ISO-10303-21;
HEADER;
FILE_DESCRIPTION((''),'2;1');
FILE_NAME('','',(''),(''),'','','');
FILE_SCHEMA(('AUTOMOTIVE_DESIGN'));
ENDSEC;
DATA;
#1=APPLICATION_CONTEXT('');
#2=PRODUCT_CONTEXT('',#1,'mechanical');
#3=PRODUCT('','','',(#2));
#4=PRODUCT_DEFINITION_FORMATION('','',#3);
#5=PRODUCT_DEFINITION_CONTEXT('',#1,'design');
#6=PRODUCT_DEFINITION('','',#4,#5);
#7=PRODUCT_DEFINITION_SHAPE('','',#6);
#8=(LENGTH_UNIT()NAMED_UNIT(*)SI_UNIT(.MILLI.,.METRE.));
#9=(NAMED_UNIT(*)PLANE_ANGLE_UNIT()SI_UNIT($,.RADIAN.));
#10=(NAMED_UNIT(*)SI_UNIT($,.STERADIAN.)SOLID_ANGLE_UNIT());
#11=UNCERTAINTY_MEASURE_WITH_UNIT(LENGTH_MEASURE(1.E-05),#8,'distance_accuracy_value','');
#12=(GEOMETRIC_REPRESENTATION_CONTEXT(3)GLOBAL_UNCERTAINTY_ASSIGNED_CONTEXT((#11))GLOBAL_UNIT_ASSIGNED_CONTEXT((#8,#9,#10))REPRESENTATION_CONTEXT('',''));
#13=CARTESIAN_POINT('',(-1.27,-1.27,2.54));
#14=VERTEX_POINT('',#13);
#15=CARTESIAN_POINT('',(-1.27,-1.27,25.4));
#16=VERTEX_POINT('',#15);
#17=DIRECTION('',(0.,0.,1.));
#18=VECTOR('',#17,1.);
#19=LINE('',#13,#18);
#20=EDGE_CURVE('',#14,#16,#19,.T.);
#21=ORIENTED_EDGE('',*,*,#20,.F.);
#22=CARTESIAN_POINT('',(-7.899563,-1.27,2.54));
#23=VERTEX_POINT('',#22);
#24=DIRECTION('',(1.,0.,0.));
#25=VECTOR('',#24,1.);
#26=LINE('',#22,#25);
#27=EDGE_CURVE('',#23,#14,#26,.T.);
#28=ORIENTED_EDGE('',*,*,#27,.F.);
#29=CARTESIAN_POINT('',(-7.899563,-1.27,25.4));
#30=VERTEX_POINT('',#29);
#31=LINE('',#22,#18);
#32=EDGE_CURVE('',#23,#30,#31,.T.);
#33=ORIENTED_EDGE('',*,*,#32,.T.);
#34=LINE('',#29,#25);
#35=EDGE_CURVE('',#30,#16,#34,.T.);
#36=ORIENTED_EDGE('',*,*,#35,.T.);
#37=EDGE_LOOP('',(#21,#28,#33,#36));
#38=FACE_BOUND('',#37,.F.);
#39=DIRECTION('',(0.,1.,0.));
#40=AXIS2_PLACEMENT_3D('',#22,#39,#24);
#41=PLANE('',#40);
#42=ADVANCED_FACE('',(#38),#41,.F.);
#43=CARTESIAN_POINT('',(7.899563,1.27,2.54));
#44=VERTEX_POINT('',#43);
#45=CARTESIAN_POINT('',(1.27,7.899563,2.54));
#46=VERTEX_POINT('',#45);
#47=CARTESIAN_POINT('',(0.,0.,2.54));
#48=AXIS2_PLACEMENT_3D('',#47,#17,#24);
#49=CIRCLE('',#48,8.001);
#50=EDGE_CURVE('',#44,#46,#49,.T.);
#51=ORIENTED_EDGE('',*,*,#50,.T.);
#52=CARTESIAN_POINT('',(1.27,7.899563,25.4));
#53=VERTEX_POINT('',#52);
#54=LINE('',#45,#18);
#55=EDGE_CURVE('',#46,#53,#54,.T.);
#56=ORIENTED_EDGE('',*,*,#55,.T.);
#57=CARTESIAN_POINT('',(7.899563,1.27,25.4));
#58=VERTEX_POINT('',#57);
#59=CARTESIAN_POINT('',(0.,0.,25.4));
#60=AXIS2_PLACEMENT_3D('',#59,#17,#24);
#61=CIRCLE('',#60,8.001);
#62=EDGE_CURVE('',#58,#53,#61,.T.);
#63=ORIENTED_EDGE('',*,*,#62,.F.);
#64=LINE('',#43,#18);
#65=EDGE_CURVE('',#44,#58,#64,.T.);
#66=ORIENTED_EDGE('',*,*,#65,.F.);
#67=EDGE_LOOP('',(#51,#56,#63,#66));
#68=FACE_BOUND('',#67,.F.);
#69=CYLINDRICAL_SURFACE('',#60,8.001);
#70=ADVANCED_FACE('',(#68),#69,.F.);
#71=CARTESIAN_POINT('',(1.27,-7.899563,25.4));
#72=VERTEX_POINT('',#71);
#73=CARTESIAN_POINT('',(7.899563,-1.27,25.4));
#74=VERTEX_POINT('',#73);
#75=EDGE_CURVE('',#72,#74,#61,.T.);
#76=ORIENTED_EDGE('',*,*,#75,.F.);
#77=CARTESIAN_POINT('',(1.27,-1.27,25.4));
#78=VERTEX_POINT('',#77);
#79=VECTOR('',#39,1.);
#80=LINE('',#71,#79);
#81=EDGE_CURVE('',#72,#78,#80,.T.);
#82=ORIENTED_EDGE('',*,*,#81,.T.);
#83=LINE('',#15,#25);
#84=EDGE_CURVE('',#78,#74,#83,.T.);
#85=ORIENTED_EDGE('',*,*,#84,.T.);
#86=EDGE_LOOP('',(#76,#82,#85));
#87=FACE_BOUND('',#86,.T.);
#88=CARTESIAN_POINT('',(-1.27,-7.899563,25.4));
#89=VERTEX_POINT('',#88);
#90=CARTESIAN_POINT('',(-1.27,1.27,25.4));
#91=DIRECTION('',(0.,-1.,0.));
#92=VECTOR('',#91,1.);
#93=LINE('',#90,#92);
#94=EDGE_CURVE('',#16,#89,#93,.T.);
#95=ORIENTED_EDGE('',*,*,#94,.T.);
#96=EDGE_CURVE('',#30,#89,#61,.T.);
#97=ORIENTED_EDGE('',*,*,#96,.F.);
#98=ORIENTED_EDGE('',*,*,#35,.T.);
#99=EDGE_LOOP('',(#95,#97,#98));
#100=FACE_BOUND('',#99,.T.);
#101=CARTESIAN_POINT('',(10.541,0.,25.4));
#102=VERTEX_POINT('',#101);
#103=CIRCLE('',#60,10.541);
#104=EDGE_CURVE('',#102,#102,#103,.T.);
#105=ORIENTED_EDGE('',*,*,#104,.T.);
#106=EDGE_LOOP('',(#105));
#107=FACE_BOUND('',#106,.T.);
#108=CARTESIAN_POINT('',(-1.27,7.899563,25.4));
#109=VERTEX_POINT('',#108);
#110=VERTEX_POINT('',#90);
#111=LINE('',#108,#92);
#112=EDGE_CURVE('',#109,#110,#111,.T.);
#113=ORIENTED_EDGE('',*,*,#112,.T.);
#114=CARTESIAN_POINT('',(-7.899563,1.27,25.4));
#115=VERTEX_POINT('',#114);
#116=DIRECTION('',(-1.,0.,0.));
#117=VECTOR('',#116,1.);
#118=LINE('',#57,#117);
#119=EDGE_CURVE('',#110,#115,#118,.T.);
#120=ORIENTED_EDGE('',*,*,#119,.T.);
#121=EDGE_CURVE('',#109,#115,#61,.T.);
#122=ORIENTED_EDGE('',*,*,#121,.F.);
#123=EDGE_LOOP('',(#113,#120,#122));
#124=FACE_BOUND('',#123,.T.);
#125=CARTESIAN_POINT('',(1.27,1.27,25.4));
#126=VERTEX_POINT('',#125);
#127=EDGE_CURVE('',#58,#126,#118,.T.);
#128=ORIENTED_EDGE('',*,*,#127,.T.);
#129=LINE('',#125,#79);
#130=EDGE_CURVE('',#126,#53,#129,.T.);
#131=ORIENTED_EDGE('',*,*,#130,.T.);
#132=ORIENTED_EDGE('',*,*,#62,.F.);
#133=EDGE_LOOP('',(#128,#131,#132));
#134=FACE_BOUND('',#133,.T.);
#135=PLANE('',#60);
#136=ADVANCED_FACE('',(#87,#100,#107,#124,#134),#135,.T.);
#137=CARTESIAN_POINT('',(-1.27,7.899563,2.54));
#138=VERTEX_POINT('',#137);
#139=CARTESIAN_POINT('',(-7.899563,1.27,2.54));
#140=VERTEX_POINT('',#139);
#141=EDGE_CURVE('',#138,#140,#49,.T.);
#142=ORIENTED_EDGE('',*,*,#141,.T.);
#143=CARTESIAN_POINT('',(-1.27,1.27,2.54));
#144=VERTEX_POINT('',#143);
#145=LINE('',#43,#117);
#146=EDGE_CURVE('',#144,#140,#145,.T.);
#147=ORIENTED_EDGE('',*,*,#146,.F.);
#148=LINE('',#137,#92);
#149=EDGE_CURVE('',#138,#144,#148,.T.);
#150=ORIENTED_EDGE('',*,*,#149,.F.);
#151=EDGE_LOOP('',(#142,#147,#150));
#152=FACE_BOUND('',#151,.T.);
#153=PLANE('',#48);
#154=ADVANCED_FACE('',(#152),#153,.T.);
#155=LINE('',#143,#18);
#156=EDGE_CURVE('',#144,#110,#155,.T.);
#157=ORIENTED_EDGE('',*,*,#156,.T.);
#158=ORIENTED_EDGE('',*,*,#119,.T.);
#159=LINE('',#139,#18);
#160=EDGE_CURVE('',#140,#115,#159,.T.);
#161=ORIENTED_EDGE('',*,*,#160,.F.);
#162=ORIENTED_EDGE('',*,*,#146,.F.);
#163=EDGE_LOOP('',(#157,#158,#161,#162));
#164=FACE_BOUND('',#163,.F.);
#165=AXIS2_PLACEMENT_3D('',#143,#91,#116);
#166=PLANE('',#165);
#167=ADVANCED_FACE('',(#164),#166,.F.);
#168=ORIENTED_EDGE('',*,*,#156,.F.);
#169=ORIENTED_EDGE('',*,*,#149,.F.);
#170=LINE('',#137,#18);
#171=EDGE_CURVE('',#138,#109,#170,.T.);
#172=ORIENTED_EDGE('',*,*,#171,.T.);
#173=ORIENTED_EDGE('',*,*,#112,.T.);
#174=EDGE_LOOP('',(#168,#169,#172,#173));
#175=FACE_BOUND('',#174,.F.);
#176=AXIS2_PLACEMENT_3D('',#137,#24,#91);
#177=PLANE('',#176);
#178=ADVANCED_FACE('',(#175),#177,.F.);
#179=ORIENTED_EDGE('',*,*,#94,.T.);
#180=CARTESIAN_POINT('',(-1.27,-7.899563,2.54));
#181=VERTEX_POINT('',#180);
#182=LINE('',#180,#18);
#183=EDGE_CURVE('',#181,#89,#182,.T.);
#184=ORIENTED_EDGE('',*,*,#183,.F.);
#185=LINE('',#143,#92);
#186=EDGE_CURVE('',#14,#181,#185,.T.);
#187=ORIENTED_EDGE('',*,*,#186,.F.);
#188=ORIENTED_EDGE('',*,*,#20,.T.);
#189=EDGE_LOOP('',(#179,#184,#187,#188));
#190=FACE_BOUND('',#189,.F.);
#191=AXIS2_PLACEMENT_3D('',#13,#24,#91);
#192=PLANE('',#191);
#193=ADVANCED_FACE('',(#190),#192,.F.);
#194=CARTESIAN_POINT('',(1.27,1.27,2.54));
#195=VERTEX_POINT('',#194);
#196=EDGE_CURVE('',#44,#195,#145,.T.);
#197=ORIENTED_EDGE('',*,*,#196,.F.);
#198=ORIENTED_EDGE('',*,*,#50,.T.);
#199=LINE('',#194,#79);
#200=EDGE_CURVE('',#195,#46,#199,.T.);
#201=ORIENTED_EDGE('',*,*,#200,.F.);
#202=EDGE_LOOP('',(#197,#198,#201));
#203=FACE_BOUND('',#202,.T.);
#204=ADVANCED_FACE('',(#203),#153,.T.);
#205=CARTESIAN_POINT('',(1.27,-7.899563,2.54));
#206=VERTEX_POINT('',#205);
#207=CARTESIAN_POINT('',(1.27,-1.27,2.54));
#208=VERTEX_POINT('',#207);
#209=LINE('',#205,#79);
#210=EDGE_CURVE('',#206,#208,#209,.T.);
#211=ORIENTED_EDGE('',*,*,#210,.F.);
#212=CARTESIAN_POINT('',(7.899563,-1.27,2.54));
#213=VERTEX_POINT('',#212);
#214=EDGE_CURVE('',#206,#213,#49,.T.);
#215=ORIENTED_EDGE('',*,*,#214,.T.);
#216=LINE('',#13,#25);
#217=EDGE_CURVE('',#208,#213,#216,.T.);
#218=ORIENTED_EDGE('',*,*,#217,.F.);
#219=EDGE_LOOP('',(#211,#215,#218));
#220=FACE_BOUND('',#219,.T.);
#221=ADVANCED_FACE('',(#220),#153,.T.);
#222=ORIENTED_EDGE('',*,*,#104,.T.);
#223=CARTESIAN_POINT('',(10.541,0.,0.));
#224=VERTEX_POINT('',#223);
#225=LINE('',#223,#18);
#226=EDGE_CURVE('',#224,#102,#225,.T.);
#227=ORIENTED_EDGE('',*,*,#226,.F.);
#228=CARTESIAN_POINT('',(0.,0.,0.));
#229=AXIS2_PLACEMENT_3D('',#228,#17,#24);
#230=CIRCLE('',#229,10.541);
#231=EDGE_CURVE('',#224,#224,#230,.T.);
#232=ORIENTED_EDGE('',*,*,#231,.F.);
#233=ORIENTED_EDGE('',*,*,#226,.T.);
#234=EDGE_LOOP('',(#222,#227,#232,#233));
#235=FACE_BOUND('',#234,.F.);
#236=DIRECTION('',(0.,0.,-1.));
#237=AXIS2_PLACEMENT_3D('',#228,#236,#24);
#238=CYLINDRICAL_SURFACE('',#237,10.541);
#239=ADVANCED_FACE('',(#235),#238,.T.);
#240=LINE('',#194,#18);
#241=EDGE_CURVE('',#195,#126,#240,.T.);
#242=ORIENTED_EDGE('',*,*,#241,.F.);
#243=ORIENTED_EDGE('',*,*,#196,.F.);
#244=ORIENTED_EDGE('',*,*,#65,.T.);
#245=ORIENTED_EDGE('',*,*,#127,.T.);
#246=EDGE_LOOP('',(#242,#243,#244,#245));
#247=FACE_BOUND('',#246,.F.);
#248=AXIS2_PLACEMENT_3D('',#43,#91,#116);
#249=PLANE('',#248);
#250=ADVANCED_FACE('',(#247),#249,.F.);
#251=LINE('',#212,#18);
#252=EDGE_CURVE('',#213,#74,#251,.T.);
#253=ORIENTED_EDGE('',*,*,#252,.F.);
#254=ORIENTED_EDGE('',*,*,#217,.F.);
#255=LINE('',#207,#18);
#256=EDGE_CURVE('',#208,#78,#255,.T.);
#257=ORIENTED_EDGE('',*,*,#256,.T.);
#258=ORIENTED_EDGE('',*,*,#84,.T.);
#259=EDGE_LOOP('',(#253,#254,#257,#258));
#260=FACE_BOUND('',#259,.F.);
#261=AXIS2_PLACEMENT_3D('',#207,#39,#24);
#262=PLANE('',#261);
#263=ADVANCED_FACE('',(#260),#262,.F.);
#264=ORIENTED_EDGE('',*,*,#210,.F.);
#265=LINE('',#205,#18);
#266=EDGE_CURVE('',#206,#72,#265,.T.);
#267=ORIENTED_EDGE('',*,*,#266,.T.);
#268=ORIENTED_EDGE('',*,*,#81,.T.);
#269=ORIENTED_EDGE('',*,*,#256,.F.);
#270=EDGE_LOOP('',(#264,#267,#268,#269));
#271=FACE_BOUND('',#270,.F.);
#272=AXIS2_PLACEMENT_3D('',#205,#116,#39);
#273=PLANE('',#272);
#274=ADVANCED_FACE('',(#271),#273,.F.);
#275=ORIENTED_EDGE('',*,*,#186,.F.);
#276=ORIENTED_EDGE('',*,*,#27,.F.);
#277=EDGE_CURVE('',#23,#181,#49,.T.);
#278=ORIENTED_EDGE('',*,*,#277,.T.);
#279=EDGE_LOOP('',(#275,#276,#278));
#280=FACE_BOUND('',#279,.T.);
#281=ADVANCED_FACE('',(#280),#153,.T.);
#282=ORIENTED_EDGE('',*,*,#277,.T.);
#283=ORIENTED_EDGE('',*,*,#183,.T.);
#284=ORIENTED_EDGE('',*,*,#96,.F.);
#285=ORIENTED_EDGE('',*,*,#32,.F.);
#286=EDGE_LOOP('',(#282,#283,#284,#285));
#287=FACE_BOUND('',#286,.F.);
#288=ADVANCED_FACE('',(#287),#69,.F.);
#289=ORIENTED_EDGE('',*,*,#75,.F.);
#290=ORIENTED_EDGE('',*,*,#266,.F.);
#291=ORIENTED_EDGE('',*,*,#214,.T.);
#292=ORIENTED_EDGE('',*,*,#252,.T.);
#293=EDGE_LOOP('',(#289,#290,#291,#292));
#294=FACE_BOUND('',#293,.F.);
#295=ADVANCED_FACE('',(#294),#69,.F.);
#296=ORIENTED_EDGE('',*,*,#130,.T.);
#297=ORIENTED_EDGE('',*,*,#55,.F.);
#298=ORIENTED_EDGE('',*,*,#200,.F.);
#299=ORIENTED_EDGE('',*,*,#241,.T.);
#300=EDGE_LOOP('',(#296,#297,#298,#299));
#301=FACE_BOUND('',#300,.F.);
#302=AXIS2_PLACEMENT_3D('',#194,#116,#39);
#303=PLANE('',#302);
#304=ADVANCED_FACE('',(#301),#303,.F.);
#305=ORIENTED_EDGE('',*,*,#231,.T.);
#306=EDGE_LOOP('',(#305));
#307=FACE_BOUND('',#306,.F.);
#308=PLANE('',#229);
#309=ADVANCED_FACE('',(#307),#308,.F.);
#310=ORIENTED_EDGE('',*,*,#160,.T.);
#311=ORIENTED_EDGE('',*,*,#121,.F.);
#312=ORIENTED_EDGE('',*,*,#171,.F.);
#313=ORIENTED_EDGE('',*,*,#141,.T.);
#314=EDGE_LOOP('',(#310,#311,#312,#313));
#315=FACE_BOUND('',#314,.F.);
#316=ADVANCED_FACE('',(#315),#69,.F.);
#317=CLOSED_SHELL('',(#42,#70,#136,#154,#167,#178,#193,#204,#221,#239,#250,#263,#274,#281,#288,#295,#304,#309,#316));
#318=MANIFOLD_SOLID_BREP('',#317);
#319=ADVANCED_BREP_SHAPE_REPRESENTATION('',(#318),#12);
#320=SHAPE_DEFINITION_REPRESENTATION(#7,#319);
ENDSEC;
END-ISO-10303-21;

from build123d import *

# Parameters (mm, degrees)
F0_R     = 10.541
F1_DEPTH = 25.4
F2_R     = 8.001
F3_DEPTH = 22.86
F4_W     = 2.54
F4_H     = 2.54
F5_DEPTH = 22.86


with BuildPart() as f1:
    # F0 (on Top) → F1 (new body)
    with BuildSketch(Plane.XY):
        Circle(F0_R)
    extrude(amount=F1_DEPTH)

    # F2 (on face) → F3 (cut)
    with BuildSketch(Plane.XY.offset(25.4)):
        Circle(F2_R)
    extrude(amount=-F3_DEPTH, mode=Mode.SUBTRACT)

    # F4 (on face) → F5 (join)
    with BuildSketch(Plane.XY.offset(2.54)):
        Rectangle(F4_W, F4_H)
        with BuildLine():
            Line((1.27, 1.27), (1.27, -1.27))
            Line((1.27, -1.27), (7.8995633424, -1.27))
            ThreePointArc((7.8995633424, -1.27), (7.9756005198, -0.6370222515), (8.001, 0))
            ThreePointArc((8.001, 0), (7.9756005198, 0.6370222515), (7.8995633424, 1.27))
            Line((7.8995633424, 1.27), (1.27, 1.27))
        make_face()
        with BuildLine():
            Line((-1.27, -1.27), (-1.27, -7.8995633424))
            ThreePointArc((-1.27, -7.8995633424), (0, -8.001), (1.27, -7.8995633424))
            Line((1.27, -7.8995633424), (1.27, -1.27))
            Line((1.27, -1.27), (-1.27, -1.27))
        make_face()
        with BuildLine():
            Line((-7.8995633424, -1.27), (-1.27, -1.27))
            Line((-1.27, -1.27), (-1.27, 1.27))
            Line((-1.27, 1.27), (-7.8995633424, 1.27))
            ThreePointArc((-7.8995633424, 1.27), (-8.001, 0), (-7.8995633424, -1.27))
        make_face()
        with BuildLine():
            Line((-1.27, 7.8995633424), (-1.27, 1.27))
            Line((-1.27, 1.27), (1.27, 1.27))
            Line((1.27, 1.27), (1.27, 7.8995633424))
            ThreePointArc((1.27, 7.8995633424), (0, 8.001), (-1.27, 7.8995633424))
        make_face()
    extrude(amount=F5_DEPTH)


solid = f1.part
